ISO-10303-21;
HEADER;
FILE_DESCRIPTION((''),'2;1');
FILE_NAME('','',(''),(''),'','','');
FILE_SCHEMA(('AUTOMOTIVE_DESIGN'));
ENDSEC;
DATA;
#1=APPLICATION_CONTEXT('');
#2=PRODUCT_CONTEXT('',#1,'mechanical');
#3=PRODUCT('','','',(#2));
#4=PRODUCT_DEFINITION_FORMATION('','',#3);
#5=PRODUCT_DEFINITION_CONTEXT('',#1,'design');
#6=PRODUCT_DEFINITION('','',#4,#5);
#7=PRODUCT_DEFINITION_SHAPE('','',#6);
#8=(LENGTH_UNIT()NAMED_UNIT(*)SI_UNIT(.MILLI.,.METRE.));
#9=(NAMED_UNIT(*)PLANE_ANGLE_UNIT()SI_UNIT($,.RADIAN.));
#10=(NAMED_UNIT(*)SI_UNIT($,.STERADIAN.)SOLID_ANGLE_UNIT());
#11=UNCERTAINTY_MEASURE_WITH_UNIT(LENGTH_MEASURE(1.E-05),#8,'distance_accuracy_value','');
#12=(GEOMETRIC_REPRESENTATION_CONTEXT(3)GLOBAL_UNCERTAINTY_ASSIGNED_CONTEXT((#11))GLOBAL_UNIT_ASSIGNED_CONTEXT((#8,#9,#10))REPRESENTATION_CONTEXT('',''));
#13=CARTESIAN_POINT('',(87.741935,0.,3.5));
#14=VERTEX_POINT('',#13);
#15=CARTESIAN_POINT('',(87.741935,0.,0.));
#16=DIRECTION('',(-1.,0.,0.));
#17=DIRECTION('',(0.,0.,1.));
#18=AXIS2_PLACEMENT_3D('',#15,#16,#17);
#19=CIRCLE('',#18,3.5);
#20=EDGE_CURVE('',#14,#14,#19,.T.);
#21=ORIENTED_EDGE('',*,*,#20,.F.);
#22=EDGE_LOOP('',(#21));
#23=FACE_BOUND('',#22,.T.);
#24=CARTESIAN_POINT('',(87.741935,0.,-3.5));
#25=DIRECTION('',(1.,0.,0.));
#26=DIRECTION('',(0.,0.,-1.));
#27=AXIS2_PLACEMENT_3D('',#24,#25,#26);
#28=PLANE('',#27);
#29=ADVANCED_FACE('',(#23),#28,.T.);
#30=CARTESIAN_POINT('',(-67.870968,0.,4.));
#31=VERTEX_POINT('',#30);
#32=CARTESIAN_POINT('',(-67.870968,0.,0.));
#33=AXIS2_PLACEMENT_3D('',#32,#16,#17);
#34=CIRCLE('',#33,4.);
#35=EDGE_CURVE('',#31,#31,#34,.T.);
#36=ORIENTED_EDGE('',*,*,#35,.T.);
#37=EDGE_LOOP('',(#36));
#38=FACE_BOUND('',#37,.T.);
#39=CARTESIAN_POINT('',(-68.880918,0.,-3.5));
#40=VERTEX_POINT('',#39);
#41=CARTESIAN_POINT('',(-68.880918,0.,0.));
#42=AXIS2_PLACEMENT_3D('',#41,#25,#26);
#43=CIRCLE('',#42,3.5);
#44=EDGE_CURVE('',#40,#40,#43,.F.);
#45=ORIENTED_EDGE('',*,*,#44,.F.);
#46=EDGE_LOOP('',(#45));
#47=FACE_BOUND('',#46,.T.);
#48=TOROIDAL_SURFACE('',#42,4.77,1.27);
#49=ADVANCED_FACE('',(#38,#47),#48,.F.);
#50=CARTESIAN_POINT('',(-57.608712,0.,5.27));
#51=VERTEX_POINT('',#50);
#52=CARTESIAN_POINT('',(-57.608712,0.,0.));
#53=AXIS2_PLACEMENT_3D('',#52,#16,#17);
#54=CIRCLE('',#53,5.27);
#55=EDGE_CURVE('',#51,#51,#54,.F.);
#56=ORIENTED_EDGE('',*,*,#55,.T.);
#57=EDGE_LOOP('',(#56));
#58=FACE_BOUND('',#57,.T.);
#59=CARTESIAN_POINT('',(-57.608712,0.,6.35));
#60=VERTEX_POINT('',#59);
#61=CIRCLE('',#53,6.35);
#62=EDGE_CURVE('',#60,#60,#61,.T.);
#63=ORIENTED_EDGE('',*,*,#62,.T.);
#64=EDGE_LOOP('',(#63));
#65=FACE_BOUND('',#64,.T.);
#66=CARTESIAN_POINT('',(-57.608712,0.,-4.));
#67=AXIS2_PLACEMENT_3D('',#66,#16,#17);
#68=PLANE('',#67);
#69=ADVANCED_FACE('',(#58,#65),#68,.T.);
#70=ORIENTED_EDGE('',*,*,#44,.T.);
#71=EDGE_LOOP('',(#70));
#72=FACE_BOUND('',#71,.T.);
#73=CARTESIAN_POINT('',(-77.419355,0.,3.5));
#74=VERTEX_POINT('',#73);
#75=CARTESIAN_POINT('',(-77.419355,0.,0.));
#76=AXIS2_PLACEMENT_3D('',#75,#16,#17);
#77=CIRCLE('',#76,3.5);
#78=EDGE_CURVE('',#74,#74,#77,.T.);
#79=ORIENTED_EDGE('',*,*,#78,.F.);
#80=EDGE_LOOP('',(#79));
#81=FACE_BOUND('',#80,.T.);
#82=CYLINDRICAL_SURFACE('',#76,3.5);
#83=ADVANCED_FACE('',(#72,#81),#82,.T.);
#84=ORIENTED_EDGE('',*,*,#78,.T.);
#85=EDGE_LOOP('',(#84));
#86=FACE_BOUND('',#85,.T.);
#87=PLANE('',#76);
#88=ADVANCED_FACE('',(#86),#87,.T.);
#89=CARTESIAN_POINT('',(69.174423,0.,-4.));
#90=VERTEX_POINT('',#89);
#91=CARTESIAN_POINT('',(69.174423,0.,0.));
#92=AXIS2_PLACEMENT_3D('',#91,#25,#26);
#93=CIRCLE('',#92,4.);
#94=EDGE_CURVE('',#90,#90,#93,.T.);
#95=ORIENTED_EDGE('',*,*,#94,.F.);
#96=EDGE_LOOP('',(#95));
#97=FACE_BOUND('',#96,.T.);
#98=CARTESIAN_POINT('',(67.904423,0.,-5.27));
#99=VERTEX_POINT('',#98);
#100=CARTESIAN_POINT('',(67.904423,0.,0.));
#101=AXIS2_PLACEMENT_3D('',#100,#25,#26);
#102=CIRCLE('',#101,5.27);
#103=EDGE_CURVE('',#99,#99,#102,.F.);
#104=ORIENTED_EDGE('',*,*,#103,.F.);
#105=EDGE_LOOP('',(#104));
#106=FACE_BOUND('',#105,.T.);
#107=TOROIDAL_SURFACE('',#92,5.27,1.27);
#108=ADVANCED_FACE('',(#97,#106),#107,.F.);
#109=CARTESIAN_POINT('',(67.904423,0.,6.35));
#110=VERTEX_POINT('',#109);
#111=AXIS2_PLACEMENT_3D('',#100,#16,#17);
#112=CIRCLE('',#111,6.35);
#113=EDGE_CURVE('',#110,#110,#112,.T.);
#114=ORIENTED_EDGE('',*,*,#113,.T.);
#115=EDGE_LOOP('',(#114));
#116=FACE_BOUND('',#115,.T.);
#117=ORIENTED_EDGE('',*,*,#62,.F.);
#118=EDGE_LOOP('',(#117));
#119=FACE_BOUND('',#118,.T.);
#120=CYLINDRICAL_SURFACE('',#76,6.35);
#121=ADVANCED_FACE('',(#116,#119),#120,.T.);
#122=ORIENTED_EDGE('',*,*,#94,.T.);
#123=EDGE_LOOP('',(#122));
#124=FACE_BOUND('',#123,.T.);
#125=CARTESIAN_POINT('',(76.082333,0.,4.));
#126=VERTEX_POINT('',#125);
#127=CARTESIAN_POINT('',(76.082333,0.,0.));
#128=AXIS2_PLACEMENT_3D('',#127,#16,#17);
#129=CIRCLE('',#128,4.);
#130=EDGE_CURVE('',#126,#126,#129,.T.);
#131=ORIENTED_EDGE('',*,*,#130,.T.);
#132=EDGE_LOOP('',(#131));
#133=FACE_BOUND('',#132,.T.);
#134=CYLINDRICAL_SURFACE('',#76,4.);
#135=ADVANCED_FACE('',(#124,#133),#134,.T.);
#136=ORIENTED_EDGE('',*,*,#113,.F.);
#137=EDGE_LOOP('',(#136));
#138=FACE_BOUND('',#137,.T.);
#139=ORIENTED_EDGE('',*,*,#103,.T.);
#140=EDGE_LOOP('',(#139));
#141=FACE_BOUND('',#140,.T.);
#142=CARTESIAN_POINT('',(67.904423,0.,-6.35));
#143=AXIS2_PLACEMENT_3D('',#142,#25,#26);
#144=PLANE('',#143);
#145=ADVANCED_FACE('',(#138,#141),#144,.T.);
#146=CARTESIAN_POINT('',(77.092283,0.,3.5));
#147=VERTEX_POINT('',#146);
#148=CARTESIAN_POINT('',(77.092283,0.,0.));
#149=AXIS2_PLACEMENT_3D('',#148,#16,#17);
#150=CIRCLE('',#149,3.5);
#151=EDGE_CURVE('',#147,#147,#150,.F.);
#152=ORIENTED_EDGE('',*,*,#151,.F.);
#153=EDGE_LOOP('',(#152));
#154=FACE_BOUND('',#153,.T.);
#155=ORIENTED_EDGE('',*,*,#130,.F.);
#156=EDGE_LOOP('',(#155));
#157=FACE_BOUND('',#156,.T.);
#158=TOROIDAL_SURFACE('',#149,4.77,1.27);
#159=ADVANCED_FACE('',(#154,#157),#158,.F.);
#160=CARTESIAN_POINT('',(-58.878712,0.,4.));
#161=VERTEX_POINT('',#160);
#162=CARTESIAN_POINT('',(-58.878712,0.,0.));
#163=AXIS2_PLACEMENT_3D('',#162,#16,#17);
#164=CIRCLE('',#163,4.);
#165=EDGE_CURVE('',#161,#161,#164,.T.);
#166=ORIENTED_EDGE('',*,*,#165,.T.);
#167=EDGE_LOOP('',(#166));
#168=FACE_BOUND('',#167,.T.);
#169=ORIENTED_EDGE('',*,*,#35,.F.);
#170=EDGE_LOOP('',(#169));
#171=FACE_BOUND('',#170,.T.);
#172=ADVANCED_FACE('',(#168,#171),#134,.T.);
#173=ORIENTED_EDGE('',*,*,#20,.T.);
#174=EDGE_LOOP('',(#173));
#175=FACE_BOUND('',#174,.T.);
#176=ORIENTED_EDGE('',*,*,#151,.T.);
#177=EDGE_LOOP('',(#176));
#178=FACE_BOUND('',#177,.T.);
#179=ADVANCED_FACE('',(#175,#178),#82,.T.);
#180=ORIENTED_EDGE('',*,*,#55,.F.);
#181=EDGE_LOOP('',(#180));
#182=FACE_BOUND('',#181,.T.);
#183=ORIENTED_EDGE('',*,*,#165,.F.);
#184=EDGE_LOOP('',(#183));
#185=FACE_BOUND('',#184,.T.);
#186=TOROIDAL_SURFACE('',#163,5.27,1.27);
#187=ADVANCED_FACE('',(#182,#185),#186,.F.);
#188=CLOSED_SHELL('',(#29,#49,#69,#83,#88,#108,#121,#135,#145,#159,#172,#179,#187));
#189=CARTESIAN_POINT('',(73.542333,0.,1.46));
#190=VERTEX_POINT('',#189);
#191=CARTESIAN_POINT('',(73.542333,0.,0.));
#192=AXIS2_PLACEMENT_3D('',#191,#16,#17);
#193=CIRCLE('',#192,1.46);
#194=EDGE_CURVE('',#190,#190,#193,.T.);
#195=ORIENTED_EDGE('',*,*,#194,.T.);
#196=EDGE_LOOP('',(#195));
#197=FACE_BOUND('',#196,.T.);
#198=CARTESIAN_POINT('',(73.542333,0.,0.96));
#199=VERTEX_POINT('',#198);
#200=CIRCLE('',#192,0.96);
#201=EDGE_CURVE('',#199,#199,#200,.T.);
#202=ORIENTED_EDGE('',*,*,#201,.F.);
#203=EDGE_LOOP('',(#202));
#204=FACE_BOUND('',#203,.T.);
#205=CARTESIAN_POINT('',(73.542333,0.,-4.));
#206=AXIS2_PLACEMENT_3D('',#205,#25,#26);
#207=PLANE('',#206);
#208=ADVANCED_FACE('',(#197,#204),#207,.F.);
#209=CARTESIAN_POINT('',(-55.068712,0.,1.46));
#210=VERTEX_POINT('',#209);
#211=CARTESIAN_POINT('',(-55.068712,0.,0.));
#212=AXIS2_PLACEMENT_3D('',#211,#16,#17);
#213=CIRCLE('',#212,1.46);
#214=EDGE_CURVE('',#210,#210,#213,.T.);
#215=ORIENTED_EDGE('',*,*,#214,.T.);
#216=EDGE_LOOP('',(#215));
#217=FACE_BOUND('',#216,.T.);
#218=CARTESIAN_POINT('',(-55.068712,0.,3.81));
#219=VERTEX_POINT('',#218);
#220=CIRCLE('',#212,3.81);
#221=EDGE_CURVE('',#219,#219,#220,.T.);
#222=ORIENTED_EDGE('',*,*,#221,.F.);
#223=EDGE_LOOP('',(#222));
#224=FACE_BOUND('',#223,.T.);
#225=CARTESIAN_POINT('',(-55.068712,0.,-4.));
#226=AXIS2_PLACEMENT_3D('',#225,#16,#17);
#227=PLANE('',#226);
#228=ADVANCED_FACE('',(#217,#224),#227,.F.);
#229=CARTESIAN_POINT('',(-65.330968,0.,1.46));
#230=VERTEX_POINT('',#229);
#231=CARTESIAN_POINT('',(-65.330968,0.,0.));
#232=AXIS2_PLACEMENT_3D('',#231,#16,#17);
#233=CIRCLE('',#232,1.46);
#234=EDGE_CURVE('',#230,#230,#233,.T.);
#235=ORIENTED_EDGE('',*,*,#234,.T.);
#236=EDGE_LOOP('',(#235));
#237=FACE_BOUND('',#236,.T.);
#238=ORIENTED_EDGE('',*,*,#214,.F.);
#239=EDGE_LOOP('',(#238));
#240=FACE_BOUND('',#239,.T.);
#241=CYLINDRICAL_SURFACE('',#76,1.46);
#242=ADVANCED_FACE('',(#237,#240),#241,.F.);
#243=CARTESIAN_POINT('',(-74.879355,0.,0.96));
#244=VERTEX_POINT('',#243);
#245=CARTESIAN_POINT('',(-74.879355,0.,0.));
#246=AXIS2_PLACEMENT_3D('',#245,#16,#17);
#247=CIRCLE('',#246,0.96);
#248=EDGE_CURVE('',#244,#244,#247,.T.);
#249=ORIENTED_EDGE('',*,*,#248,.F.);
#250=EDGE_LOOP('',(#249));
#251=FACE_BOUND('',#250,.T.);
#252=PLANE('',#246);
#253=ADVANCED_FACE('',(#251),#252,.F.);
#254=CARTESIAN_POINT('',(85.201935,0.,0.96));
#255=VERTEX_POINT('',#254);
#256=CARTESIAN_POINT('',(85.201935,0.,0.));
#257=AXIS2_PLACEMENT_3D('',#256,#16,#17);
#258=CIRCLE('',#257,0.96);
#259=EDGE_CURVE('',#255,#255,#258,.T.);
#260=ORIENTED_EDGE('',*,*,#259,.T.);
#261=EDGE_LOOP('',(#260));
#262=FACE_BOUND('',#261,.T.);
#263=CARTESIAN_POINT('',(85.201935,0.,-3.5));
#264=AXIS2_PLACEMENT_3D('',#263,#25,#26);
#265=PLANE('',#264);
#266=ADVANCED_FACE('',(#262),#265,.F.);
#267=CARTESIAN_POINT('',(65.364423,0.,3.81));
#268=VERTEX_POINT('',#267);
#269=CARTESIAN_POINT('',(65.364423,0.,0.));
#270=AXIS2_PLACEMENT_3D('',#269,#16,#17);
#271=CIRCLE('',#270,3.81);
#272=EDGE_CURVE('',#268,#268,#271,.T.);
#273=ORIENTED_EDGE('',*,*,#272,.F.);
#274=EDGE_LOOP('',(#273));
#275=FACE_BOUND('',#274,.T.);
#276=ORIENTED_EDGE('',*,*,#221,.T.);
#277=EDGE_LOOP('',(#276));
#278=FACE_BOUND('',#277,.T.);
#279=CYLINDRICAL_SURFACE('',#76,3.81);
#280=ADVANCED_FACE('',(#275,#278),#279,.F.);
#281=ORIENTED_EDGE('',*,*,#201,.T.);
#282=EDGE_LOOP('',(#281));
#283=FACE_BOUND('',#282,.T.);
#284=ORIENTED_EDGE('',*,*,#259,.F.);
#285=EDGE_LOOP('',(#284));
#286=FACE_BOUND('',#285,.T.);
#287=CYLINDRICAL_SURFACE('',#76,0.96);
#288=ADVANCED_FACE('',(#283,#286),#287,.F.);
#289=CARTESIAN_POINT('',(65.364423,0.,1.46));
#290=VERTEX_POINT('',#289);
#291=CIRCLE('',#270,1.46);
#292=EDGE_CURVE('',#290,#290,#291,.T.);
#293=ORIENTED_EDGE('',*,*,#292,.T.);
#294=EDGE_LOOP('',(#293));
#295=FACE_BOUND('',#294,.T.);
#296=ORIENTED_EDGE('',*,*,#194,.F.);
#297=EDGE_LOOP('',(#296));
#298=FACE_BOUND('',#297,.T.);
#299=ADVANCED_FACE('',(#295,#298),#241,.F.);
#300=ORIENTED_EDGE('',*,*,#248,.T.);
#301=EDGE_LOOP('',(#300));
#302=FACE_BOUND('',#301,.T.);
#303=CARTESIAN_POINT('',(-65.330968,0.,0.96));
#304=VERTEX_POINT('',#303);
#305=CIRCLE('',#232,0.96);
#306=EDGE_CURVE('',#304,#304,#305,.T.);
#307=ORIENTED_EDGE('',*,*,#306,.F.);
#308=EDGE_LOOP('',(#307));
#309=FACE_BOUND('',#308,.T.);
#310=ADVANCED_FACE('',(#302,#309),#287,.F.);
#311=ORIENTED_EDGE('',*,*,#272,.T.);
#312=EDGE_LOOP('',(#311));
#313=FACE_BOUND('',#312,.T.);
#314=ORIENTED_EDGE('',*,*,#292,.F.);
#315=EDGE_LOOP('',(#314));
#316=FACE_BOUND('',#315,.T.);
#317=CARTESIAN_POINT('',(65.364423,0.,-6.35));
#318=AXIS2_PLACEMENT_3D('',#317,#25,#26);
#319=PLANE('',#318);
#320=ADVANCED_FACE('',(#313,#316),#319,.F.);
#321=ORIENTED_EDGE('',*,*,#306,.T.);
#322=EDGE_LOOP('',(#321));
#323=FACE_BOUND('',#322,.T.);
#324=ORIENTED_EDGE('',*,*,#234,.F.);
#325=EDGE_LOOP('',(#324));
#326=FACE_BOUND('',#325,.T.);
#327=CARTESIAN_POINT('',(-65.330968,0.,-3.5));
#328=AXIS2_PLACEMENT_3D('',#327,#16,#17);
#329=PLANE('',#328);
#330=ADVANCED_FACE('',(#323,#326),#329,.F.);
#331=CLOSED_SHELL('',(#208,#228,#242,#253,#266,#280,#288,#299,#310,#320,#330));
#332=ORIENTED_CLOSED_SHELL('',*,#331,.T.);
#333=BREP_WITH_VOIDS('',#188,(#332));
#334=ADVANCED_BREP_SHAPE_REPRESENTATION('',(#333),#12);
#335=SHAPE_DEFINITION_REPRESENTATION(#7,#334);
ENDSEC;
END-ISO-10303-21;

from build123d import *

# Parameters (mm, degrees)
FILLET1_R = 1.27


with BuildPart() as part:
    # Sketch1 → Revolve-Thin1 (revolve)
    with BuildSketch(Plane(origin=(0, 0, 0), x_dir=(1, 0, 0), z_dir=(0, 1, 0)), mode=Mode.PRIVATE) as revolve_thin1_sk:
        Polygon((-77.419354839, 0), (-77.419354839, 3.5), (-67.870967742, 3.5), (-67.870967742, 4), (-57.608712258, 4), (-57.608712258, 6.35), (67.904423226, 6.35), (67.904423226, 4), (76.082332903, 4), (76.082332903, 3.5), (87.741935484, 3.5), (87.741935484, 0), (85.201935484, 0), (85.201935484, 0.96), (73.542332903, 0.96), (73.542332903, 1.46), (65.364423226, 1.46), (65.364423226, 3.81), (-55.068712258, 3.81), (-55.068712258, 1.46), (-65.330967742, 1.46), (-65.330967742, 0.96), (-74.879354839, 0.96), (-74.879354839, 0), align=None)
    revolve(revolve_thin1_sk.sketch.rotate(Axis((-77.419354839, 0, 0), (1, 0, 0)), 180), axis=Axis((-77.419354839, 0, 0), (1, 0, 0)))

    # Fillet1
    # the kernel refuses this fillet: 1.27 mm, written as the material it adds along each edge
    with BuildSketch(Plane(origin=(-67.870967742, 0, 0), x_dir=(0, 0, 1), z_dir=(0, 1, 0))) as fillet1_piece_1:
        with BuildLine():
            CenterArc((4.77, -1.009950494), FILLET1_R, 127.322390296, 52.677609704)
            Line((4, 0), (3.9846, 0.02019901))
            ThreePointArc((3.9846, 0.02019901), (3.75, 0.0254), (3.5, 0.0254))
            Line((3.5, 0.0254), (3.4746, 0))
            Line((3.4746, 0), (3.4746, -1.009950494))
            Line((3.4746, -1.009950494), (3.5, -1.009950494))
        make_face()
    revolve(axis=Axis((-67.870967742, 0, 0), (1, 0, 0)))
    with BuildSketch(Plane(origin=(-57.608712258, 0, 0), x_dir=(0, 0, 1), z_dir=(0, 1, 0))) as fillet1_piece_2:
        with BuildLine():
            CenterArc((4 + FILLET1_R, -FILLET1_R), FILLET1_R, 90, 90)
            Line((4 + FILLET1_R, 0), (4 + FILLET1_R, FILLET1_R * 0.02))
            Line((4 + FILLET1_R, FILLET1_R * 0.02), (4 - FILLET1_R * 0.02, FILLET1_R * 0.02))
            Line((4 - FILLET1_R * 0.02, FILLET1_R * 0.02), (4 - FILLET1_R * 0.02, -FILLET1_R))
            Line((4 - FILLET1_R * 0.02, -FILLET1_R), (4, -FILLET1_R))
        make_face()
    revolve(axis=Axis((-57.608712258, 0, 0), (1, 0, 0)))
    with BuildSketch(Plane(origin=(67.904423226, 0, 0), x_dir=(0, 0, 1), z_dir=(0, 1, 0))) as fillet1_piece_3:
        with BuildLine():
            CenterArc((4 + FILLET1_R, FILLET1_R), FILLET1_R, 180, 90)
            Line((4, FILLET1_R), (4 - FILLET1_R * 0.02, FILLET1_R))
            Line((4 - FILLET1_R * 0.02, FILLET1_R), (4 - FILLET1_R * 0.02, -FILLET1_R * 0.02))
            Line((4 - FILLET1_R * 0.02, -FILLET1_R * 0.02), (4 + FILLET1_R, -FILLET1_R * 0.02))
            Line((4 + FILLET1_R, -FILLET1_R * 0.02), (4 + FILLET1_R, 0))
        make_face()
    revolve(axis=Axis((67.904423226, 0, 0), (1, 0, 0)))
    with BuildSketch(Plane(origin=(76.082332903, 0, 0), x_dir=(0, 0, 1), z_dir=(0, 1, 0))) as fillet1_piece_4:
        with BuildLine():
            CenterArc((4.77, 1.009950494), FILLET1_R, 180, 52.677609704)
            Line((3.5, 1.009950494), (3.4746, 1.009950494))
            Line((3.4746, 1.009950494), (3.4746, 0))
            Line((3.4746, 0), (3.5, -0.0254))
            ThreePointArc((3.5, -0.0254), (3.75, -0.0254), (3.9846, -0.02019901))
            Line((3.9846, -0.02019901), (4, 0))
        make_face()
    revolve(axis=Axis((76.082332903, 0, 0), (1, 0, 0)))


solid = part.part
